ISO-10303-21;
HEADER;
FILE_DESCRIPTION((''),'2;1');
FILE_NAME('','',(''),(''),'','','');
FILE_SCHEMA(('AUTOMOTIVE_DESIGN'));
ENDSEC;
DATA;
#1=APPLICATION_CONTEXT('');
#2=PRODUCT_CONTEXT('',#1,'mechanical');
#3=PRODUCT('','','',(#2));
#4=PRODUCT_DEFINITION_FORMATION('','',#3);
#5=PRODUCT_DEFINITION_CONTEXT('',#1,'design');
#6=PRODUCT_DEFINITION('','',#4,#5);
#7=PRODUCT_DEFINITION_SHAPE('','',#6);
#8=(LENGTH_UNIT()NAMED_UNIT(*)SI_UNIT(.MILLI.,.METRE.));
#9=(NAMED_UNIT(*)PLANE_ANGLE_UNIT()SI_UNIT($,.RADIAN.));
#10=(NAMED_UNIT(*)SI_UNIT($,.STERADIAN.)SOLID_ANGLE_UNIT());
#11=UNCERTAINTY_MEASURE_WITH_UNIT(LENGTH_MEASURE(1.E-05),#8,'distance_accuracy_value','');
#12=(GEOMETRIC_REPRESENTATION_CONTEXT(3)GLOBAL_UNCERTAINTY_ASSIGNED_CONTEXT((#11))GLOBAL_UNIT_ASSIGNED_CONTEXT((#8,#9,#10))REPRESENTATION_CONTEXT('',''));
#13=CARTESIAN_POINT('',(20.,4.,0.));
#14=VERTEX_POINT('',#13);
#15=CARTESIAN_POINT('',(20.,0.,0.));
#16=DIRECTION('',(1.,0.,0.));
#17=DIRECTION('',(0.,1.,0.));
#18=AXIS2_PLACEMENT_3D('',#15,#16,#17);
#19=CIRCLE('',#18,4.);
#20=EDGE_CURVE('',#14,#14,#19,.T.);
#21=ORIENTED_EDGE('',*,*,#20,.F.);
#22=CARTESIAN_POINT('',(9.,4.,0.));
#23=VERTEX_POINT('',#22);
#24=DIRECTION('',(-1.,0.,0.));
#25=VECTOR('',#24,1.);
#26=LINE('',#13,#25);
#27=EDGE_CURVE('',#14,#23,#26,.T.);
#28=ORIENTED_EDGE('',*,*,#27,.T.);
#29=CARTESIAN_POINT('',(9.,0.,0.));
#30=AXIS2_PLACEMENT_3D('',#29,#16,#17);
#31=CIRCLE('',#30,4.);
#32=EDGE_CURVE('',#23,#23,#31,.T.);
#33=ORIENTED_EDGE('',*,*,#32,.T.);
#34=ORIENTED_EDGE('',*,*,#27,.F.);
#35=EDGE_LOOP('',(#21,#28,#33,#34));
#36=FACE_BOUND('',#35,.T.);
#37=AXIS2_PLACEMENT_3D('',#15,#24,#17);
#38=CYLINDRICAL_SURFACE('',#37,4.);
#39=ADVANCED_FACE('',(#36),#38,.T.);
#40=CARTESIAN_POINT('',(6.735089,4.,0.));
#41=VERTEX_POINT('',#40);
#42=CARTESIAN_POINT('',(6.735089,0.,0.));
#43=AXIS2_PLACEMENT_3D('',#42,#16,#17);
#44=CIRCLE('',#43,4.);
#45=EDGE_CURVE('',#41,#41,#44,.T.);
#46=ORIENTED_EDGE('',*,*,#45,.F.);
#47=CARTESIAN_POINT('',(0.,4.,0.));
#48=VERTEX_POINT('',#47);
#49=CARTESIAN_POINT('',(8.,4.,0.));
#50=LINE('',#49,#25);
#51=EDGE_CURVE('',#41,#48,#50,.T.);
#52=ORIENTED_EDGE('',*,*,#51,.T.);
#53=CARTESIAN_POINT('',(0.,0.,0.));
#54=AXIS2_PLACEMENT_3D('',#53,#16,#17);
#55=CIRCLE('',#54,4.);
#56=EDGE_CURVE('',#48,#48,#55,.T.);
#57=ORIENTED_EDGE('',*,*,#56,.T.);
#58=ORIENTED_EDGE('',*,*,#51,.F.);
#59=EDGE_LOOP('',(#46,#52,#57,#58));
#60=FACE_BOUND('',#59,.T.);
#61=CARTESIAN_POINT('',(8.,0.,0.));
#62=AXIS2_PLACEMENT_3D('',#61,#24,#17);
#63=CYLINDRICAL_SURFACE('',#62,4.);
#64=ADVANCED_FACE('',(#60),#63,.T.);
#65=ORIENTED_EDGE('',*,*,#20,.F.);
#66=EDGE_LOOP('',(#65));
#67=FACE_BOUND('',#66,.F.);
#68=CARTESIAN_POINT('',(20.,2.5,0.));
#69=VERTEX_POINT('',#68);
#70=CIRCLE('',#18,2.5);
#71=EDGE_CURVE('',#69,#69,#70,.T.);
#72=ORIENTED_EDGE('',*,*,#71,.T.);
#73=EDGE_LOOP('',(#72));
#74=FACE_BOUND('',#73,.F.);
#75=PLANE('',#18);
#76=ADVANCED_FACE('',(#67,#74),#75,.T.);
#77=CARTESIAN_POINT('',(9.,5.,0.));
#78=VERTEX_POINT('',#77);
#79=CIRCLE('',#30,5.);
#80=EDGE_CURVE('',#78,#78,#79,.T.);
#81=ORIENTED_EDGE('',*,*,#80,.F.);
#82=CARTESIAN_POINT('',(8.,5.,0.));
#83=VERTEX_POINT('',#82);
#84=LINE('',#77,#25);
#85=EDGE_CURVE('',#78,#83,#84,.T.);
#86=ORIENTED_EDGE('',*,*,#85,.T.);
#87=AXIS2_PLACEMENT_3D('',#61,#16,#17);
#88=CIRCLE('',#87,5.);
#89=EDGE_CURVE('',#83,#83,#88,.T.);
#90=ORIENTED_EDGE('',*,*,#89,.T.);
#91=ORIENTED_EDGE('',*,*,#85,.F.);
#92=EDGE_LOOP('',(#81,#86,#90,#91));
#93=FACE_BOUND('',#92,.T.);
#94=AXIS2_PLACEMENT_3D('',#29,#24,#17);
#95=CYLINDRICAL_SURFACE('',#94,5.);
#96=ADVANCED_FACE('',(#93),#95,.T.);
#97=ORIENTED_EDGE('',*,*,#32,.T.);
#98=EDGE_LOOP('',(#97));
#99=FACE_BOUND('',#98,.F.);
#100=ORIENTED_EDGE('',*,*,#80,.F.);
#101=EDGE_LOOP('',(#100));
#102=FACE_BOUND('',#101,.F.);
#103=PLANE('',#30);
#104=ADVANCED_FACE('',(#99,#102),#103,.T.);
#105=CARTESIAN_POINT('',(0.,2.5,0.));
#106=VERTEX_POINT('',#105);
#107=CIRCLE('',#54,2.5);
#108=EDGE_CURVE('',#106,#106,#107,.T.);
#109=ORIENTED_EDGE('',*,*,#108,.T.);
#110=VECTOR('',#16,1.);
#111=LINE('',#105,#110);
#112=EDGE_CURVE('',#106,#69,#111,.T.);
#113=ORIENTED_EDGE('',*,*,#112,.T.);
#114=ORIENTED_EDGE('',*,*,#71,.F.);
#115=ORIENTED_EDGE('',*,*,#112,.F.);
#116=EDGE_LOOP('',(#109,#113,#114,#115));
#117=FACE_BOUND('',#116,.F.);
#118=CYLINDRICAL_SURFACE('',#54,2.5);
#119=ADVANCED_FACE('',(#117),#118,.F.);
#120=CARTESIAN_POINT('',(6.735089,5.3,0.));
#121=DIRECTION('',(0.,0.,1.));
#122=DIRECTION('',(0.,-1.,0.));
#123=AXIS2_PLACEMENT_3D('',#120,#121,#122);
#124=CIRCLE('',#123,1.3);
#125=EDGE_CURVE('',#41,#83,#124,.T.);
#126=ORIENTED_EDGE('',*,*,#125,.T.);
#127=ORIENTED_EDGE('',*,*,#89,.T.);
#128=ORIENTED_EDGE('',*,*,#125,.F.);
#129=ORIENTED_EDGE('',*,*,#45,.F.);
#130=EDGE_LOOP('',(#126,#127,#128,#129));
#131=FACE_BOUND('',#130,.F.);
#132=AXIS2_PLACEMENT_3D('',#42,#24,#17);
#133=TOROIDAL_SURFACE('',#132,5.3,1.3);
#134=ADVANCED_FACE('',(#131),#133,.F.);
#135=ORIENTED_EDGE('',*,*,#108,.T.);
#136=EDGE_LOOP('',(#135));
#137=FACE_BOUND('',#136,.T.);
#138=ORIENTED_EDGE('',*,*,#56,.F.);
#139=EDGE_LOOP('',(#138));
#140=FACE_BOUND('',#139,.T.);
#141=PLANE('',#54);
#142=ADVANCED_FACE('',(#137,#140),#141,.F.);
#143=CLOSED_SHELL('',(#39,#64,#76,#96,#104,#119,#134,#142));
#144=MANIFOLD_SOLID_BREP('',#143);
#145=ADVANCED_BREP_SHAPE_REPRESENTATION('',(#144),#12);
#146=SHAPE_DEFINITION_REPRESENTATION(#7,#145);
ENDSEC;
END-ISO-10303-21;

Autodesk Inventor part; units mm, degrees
ref_plane "YZ Plane" through (0, 0, 0) normal (1, 0, 0) x (0, 1, 0)
ref_plane "XZ Plane" through (0, 0, 0) normal (0, 1, 0) x (-1, 0, 0)
ref_plane "XY Plane" through (0, 0, 0) normal (0, 0, 1) x (1, 0, 0)
sketch "Skizze1" plane through (0, 0, 0) normal (0, 0, 1) x (1, 0, 0)
  line L0 (-4, 0) -> (24, 0) projected
  line L1 (0, -1) -> (0, 6) projected
  line L2 (0, 2.5) -> (20, 2.5)
  line L3 (20, 2.5) -> (20, 4)
  line L4 (20, 4) -> (9, 4)
  line L5 (9, 4) -> (9, 5)
  line L6 (9, 5) -> (8, 5)
  line L7 (8, 5) -> (8, 4)
  line L8 (8, 4) -> (0, 4)
  line L9 (0, 4) -> (0, 2.5)
  point P0 (0, 0)
  dimension "d0" = 10
  dimension "d1" = 8
  dimension "d2" = 8
  dimension "d3" = 11
  dimension "d4" = 5
  dimension "d5" = 20
revolve "Umdrehung1" add sketch "Skizze1" angle 360 about axis through (-10, 0, 0) along (1, 0, 0)
fillet "Rundung1" radius 1.3 1 edges at (8, -4, 0)
properties part number "Lagerbuchse"
